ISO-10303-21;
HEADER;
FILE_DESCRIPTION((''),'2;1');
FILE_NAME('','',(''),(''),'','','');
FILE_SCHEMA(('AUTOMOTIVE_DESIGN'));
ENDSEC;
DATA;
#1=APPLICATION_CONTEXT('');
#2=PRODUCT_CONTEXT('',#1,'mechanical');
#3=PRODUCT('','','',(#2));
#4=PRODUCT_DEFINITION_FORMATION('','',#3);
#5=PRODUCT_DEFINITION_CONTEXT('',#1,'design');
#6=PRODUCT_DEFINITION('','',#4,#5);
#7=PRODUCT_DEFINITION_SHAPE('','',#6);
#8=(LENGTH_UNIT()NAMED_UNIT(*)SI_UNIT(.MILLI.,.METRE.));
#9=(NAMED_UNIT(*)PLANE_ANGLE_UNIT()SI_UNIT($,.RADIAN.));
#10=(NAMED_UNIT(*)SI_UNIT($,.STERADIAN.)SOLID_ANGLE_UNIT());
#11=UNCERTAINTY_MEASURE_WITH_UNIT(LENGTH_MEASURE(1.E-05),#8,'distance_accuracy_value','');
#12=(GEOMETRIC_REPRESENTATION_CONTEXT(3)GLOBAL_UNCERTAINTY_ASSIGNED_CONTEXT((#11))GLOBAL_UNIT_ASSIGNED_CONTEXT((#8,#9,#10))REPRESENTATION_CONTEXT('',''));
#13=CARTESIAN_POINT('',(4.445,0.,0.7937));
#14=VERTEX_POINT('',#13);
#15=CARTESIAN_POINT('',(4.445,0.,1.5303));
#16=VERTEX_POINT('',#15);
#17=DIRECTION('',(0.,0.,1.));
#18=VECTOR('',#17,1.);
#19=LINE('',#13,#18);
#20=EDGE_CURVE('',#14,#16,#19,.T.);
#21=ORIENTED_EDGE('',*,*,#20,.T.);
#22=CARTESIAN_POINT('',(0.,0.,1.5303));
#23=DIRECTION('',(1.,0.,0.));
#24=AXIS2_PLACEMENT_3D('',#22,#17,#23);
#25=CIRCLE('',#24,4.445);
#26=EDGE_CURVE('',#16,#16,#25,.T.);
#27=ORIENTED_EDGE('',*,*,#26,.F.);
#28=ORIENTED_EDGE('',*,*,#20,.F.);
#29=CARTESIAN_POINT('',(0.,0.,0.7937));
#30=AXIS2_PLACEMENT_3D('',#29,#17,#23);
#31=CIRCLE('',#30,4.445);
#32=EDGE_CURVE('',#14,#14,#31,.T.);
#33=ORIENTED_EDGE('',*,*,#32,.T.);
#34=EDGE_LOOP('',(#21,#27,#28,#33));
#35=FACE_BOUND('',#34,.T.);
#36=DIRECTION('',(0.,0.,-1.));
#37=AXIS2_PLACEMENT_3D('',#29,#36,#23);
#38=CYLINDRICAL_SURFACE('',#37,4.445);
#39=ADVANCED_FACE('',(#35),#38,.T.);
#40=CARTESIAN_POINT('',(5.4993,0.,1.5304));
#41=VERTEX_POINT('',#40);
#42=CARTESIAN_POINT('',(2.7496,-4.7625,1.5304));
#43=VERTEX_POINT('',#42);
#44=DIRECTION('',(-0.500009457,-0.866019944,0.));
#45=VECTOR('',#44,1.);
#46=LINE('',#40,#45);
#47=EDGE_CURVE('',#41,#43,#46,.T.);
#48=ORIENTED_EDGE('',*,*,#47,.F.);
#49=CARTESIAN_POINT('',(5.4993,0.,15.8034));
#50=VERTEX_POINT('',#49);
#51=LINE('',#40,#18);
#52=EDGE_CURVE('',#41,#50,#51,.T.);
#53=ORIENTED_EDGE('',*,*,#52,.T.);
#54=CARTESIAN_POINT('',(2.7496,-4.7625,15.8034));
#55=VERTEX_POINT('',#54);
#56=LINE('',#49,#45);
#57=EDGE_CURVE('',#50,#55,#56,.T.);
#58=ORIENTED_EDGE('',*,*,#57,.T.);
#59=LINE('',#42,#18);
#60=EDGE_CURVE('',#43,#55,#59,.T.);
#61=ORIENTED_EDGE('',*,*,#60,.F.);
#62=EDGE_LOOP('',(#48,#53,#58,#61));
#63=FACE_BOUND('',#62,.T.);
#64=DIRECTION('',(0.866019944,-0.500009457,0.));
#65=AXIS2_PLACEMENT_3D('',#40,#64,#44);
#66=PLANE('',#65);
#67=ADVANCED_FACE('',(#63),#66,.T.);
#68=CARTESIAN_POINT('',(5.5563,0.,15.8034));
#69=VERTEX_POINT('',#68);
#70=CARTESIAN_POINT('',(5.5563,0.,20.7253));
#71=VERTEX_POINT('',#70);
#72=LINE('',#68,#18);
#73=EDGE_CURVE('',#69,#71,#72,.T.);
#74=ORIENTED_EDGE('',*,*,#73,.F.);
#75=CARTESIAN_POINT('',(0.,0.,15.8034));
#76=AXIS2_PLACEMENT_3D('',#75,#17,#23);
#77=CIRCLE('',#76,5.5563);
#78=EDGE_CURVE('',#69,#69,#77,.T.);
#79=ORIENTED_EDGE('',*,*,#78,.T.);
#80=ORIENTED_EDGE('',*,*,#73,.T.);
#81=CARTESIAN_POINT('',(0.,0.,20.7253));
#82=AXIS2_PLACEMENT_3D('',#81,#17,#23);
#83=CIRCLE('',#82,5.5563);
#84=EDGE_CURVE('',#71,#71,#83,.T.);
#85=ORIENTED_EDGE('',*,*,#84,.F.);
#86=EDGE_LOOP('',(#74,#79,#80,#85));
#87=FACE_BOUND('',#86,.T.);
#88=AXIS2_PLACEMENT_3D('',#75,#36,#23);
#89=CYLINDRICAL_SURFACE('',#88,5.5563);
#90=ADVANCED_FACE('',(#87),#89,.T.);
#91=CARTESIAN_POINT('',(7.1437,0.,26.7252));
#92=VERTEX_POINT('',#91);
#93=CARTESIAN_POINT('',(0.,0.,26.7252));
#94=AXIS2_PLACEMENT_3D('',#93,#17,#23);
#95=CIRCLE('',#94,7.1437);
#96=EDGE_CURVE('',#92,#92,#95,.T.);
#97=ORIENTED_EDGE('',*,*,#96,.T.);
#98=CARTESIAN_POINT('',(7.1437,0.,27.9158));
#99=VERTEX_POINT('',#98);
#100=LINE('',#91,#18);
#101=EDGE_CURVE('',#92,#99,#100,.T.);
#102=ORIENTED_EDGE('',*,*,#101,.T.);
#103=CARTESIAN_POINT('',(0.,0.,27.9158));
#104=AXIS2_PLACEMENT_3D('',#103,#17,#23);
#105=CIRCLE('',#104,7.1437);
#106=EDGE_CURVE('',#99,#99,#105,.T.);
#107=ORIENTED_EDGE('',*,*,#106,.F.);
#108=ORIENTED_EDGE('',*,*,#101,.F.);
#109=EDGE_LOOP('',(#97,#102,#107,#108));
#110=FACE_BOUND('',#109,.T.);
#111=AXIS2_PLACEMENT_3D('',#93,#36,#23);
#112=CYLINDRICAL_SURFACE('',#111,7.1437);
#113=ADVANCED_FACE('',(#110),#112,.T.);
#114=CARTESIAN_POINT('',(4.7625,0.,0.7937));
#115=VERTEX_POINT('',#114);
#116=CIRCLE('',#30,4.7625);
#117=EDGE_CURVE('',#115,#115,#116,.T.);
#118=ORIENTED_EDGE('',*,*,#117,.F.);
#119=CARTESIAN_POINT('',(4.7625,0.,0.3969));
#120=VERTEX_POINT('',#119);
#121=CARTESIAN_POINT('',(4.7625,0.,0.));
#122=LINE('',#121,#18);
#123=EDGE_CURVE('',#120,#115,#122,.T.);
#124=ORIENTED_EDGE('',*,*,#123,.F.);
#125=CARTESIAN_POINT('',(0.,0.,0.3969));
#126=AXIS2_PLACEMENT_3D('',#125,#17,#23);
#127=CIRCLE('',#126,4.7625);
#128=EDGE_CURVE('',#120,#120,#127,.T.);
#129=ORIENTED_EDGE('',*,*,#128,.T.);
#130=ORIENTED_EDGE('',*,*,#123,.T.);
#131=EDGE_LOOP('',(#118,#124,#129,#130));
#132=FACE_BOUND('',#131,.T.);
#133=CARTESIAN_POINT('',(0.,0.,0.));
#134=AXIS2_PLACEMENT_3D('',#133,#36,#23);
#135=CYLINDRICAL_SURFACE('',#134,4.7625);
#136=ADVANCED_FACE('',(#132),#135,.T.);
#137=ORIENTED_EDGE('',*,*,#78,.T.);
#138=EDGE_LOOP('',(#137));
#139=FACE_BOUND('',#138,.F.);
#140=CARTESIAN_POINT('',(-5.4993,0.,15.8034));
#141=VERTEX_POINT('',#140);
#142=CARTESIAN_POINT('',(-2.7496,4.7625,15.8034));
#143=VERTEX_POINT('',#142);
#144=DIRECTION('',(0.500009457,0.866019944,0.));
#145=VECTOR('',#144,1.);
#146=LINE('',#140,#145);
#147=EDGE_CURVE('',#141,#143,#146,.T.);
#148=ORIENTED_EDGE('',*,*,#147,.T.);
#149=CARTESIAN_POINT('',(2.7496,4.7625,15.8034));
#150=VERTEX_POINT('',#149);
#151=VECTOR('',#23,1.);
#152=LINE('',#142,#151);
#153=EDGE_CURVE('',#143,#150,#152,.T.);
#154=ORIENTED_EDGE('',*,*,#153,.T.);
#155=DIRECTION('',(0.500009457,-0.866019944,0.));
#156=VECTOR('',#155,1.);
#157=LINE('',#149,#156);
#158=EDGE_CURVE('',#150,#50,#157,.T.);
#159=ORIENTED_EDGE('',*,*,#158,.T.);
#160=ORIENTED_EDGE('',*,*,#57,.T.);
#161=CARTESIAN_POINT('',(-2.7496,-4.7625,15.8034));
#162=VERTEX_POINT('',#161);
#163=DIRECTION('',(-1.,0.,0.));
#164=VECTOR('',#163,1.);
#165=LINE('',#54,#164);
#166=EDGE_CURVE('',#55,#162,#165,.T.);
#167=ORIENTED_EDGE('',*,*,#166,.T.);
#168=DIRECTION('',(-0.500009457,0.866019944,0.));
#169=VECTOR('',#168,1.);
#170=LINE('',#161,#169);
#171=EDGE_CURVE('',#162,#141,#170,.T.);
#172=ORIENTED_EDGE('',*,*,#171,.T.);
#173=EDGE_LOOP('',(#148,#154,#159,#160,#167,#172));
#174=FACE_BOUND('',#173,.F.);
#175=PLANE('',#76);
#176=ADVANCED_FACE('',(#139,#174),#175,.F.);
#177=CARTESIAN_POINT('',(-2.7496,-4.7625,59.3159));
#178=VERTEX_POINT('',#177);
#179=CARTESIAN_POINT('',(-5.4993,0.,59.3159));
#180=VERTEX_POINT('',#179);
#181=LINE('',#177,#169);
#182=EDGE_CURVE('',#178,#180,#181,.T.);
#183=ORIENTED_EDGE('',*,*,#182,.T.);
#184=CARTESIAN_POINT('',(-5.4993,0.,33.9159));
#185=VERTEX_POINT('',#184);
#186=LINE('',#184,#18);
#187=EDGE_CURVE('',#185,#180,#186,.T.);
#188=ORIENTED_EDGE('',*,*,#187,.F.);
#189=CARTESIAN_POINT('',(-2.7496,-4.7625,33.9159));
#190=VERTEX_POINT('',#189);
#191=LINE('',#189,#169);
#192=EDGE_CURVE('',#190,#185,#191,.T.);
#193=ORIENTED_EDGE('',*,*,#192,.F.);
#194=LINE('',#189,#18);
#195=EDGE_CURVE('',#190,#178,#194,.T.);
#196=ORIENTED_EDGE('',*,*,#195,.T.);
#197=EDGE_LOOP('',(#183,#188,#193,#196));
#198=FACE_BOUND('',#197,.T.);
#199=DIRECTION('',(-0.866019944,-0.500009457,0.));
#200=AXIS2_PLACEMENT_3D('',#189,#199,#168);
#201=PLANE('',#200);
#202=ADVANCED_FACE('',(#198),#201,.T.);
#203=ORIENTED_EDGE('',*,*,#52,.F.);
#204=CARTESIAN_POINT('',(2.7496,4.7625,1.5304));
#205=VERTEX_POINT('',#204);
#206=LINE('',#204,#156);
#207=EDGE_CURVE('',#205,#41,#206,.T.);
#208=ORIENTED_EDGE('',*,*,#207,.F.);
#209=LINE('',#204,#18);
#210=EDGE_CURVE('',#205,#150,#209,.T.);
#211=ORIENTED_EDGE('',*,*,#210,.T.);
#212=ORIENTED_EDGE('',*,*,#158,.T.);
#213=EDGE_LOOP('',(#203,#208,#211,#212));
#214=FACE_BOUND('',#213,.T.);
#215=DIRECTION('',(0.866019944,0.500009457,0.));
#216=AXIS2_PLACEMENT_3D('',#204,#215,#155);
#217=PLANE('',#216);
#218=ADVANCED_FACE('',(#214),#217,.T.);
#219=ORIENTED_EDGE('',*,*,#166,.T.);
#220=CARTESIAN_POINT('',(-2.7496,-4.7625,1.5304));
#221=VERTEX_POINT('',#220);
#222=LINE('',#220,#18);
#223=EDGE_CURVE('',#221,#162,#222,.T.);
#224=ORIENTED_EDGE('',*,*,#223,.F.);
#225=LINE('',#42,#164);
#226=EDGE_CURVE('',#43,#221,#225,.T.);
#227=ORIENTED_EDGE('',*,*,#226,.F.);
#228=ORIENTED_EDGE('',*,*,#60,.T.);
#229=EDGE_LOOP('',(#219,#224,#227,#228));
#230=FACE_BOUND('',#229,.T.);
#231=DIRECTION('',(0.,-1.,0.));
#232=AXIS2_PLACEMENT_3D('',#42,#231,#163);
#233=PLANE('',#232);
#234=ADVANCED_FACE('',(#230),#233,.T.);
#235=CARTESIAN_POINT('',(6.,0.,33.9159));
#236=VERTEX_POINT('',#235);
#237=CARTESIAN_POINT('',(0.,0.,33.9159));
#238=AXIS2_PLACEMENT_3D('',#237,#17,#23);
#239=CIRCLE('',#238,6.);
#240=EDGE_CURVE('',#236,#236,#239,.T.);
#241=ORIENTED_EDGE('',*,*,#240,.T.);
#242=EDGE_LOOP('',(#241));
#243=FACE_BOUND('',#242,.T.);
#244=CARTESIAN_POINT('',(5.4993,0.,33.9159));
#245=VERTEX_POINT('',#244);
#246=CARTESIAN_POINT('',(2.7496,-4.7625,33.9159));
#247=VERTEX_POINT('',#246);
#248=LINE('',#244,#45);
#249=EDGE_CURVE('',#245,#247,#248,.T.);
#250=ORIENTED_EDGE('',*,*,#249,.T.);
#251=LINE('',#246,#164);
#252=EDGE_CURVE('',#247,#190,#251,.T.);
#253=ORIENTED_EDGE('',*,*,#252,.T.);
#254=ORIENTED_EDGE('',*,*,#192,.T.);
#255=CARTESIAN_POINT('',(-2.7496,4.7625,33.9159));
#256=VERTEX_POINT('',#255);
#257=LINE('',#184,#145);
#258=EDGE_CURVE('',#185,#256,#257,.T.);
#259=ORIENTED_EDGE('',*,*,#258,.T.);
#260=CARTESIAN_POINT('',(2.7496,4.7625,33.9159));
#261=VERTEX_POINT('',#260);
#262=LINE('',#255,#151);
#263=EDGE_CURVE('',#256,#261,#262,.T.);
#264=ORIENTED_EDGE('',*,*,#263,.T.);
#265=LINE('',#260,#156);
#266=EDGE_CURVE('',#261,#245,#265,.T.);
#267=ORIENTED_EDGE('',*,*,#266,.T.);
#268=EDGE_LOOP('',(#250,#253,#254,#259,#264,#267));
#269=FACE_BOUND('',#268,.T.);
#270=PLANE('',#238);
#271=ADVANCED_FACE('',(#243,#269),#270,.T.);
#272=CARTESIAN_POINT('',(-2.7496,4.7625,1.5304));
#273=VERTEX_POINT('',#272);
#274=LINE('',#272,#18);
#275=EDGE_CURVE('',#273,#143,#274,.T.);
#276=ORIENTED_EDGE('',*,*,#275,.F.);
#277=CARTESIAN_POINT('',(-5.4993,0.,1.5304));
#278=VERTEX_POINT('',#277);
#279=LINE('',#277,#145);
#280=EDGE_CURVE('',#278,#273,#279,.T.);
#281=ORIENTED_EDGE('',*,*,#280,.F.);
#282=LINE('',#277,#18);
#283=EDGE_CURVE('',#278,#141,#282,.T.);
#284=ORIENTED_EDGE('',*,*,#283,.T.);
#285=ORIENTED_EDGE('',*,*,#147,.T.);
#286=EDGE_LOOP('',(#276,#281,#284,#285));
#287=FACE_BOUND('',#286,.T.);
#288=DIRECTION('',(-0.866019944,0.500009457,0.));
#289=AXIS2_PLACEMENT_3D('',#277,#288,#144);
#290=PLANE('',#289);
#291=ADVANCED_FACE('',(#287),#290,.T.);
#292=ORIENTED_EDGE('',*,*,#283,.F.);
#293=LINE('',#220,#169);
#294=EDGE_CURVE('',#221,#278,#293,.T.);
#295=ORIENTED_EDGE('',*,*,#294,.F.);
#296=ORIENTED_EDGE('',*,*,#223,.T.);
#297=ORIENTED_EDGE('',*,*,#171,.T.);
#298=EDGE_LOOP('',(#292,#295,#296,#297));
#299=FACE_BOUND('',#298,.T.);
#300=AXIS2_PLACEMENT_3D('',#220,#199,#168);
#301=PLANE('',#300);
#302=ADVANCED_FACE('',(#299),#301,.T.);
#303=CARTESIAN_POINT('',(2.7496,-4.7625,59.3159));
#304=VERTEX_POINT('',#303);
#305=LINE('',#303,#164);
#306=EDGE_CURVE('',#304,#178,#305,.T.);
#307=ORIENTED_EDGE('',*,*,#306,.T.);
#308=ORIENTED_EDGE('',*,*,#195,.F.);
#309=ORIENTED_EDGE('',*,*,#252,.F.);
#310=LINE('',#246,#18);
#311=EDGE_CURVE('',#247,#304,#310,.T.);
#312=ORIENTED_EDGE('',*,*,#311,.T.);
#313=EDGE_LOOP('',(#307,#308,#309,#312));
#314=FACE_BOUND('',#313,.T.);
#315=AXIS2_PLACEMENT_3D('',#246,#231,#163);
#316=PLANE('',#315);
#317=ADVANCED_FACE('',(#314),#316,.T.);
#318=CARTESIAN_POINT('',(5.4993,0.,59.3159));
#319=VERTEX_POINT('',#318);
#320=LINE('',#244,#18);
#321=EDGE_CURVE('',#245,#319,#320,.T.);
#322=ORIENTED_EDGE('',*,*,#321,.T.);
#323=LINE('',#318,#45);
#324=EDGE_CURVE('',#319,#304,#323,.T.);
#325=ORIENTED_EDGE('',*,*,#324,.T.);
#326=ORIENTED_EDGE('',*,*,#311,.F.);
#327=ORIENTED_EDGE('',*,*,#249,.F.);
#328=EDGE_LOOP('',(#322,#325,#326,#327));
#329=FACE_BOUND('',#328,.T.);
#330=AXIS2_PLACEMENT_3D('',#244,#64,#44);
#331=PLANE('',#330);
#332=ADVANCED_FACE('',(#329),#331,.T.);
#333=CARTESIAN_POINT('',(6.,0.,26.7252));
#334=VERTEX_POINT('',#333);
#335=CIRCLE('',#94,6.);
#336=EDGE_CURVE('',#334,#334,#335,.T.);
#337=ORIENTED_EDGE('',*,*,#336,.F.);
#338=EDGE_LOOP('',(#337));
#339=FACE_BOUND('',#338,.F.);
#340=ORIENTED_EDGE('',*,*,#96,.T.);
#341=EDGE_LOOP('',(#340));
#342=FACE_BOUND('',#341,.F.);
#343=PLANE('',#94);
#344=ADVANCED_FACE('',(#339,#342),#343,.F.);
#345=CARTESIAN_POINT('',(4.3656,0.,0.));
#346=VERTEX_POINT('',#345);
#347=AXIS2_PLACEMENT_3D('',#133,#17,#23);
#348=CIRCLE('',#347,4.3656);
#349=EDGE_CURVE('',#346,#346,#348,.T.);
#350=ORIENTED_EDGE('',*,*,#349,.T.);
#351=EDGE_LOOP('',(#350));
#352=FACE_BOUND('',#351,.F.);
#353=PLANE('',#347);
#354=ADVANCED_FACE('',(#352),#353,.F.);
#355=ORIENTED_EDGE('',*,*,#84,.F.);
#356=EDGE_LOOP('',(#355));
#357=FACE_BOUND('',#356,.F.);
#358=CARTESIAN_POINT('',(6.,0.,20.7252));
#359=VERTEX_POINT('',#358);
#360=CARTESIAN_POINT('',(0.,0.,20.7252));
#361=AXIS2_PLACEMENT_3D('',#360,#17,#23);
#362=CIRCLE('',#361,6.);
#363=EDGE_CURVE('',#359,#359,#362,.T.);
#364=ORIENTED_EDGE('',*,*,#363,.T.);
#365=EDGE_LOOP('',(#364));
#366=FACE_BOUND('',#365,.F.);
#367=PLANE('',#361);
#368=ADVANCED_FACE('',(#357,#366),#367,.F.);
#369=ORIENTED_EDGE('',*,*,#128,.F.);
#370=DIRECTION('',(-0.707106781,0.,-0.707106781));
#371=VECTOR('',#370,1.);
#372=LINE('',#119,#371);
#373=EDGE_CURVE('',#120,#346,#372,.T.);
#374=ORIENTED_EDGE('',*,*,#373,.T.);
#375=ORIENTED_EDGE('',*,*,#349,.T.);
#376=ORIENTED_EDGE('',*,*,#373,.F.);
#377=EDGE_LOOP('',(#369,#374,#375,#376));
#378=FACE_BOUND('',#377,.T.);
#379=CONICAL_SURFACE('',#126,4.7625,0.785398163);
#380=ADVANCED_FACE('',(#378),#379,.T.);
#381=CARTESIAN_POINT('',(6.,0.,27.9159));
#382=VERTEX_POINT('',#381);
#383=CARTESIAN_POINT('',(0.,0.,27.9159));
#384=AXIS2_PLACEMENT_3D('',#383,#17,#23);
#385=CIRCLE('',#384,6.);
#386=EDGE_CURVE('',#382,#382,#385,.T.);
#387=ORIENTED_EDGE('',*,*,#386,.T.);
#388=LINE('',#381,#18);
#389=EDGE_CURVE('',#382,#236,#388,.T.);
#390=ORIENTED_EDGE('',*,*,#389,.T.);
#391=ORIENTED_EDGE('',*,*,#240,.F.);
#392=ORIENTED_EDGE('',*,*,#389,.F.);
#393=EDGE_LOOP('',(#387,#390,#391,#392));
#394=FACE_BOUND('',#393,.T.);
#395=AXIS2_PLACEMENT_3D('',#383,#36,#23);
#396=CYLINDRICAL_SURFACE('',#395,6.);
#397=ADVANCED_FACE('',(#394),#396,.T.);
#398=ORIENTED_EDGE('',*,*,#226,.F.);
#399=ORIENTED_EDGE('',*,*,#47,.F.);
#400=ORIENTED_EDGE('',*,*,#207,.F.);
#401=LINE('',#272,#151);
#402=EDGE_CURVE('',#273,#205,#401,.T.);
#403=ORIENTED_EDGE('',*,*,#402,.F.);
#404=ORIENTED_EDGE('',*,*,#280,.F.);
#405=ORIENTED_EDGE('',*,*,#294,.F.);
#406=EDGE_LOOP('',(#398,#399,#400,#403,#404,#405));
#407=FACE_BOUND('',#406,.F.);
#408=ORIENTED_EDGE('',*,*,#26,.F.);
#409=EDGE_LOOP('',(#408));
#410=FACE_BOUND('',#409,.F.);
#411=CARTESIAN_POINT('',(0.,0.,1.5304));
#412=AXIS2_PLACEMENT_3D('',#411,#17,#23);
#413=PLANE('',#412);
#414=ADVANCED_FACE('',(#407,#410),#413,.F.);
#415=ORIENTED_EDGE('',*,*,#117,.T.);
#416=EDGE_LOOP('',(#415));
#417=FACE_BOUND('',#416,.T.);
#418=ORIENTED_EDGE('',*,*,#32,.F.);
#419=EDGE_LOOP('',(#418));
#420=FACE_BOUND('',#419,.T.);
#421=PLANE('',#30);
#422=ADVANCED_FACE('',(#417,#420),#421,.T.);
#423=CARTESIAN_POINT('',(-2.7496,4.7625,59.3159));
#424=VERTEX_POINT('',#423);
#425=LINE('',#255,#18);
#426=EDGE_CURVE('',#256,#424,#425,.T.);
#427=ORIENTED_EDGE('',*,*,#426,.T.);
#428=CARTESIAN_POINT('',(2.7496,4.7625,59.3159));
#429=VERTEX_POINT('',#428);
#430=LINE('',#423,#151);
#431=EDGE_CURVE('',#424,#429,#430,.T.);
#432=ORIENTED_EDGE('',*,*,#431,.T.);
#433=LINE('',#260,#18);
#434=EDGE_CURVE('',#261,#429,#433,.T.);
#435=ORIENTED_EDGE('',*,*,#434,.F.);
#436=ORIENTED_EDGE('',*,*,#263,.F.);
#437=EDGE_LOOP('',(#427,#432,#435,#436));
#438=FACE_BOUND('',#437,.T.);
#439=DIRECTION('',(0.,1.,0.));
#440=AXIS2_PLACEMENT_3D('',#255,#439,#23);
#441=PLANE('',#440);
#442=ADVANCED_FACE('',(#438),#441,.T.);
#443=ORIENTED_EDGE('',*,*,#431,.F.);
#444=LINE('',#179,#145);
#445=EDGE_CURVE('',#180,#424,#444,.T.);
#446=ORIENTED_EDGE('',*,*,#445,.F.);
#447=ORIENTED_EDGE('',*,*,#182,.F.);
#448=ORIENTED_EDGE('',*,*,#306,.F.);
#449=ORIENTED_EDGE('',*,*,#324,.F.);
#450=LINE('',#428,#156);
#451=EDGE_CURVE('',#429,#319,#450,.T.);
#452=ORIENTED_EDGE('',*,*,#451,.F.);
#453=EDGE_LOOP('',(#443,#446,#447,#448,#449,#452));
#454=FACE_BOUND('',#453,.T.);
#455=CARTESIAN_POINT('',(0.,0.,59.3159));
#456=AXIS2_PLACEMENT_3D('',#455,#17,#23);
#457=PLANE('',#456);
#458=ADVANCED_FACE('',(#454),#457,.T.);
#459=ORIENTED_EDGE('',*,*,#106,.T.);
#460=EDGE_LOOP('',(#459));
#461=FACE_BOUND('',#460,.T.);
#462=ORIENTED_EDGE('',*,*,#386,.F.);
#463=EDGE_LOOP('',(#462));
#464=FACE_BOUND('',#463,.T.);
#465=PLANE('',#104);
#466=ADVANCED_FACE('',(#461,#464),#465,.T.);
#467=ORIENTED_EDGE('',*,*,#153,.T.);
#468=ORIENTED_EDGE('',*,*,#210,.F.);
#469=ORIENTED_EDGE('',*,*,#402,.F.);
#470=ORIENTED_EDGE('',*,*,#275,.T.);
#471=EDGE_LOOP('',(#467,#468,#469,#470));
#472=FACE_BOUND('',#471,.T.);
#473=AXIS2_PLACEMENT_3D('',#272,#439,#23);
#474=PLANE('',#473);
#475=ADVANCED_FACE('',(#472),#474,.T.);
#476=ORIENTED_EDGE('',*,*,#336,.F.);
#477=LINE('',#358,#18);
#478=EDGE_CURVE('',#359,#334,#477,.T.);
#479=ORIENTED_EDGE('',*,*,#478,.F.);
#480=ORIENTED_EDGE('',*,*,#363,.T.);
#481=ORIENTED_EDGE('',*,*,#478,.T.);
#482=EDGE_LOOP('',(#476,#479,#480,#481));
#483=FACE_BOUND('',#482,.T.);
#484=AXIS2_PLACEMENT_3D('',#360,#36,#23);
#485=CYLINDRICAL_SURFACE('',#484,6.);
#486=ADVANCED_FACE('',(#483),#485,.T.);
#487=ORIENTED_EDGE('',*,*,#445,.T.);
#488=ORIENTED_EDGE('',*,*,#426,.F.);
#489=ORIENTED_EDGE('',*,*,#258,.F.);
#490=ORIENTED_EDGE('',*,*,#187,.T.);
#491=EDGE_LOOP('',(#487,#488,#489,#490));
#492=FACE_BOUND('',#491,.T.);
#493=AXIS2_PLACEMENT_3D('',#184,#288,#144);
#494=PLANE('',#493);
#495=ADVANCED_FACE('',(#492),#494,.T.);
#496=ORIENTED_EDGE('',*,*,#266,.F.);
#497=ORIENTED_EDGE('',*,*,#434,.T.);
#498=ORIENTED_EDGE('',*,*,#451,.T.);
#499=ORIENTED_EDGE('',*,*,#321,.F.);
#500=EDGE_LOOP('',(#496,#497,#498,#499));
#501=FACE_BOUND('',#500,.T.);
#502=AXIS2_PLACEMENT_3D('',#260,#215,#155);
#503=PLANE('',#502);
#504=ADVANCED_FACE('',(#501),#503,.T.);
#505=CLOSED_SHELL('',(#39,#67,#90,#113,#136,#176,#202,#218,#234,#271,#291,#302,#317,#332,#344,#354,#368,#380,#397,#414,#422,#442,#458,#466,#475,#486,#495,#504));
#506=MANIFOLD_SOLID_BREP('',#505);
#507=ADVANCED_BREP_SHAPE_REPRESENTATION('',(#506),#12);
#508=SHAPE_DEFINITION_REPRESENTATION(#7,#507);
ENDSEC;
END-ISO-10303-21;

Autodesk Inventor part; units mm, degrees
ref_plane "YZ Plane" through (0, 0, 0) normal (1, 0, 0) x (0, 1, 0)
ref_plane "XZ Plane" through (0, 0, 0) normal (0, 1, 0) x (-1, 0, 0)
ref_plane "XY Plane" through (0, 0, 0) normal (0, 0, 1) x (1, 0, 0)
sketch "Sketch1" plane through (0, 0, 0) normal (0, 0, 1) x (1, 0, 0)
  circle A0 centre (0, 0) radius 4.7625
  dimension "d0" = 9.525
extrude "Extrusion1" add sketch "Sketch1" along normal blind 0.7937
sketch "Sketch2" plane through (0, 0, 0.7937) normal (0, 0, 1) x (1, 0, 0)
  circle A0 centre (0, 0) radius 4.7625 projected
  circle A1 centre (0, 0) radius 4.445
  dimension "d3" = 8.89
extrude "Extrusion2" add sketch "Sketch2" along normal blind 0.7366 contours A1
sketch "Sketch3" plane through (0, 0, 1.5304) normal (0, 0, 1) x (1, 0, 0)
  circle A0 centre (0, 0) radius 4.445 projected
  line L0 (5.4993, 0) -> (2.7496, -4.7625)
  line L1 (2.7496, -4.7625) -> (-2.7496, -4.7625)
  line L2 (-2.7496, -4.7625) -> (-5.4993, 0)
  line L3 (-5.4993, 0) -> (-2.7496, 4.7625)
  line L4 (-2.7496, 4.7625) -> (2.7496, 4.7625)
  line L5 (2.7496, 4.7625) -> (5.4993, 0)
  dimension "d6" = 9.525
extrude "Extrusion3" add sketch "Sketch3" along normal blind 14.273 contours A0 | L0 L1 L2 L3 L4 L5
sketch "Sketch4" plane through (0, 0, 15.8034) normal (0, 0, 1) x (1, 0, 0)
  circle A0 centre (0, 0) radius 5.5563
  dimension "d9" = 11.1125
extrude "Extrusion4" add sketch "Sketch4" along normal blind 4.9219
sketch "Sketch8" plane through (0, 0, 20.7252) normal (0, 0, 1) x (1, 0, 0)
  circle A0 centre (0, 0) radius 5.5562 projected
  circle A1 centre (0, 0) radius 6
  dimension "d24" = 12
extrude "Extrusion8" add sketch "Sketch8" along normal blind 6 contours A0 | A1
sketch "Sketch5" plane through (0, 0, 26.7252) normal (0, 0, 1) x (1, 0, 0)
  circle A0 centre (0, 0) radius 7.1437
  dimension "d12" = 14.2875
extrude "Extrusion5" add sketch "Sketch5" along normal blind 1.1906
sketch "Sketch6" plane through (0, 0, 27.9159) normal (0, 0, 1) x (1, 0, 0)
  circle A0 centre (0, 0) radius 7.1437 projected
  circle A1 centre (0, 0) radius 6
  dimension "d15" = 12
extrude "Extrusion6" add sketch "Sketch6" along normal blind 6 contours A1
sketch "Sketch7" plane through (0, 0, 33.9159) normal (0, 0, 1) x (1, 0, 0)
  circle A0 centre (0, 0) radius 6 projected
  line L0 (2.7496, 4.7625) -> (5.4993, 0)
  line L1 (5.4993, 0) -> (2.7496, -4.7625)
  line L2 (2.7496, -4.7625) -> (-2.7496, -4.7625)
  line L3 (-2.7496, -4.7625) -> (-5.4993, 0)
  line L4 (-5.4993, 0) -> (-2.7496, 4.7625)
  line L5 (-2.7496, 4.7625) -> (2.7496, 4.7625)
  dimension "d18" = 9.525
extrude "Extrusion7" add sketch "Sketch7" along normal blind 25.4 contours L0 L1 L2 L3 L4 L5
chamfer "Chamfer1" distance 0.3969 angle 45 1 edges at (-4.7625, 0, 0)
properties part number "Module Top Shaft" material "Aluminum 6061"
